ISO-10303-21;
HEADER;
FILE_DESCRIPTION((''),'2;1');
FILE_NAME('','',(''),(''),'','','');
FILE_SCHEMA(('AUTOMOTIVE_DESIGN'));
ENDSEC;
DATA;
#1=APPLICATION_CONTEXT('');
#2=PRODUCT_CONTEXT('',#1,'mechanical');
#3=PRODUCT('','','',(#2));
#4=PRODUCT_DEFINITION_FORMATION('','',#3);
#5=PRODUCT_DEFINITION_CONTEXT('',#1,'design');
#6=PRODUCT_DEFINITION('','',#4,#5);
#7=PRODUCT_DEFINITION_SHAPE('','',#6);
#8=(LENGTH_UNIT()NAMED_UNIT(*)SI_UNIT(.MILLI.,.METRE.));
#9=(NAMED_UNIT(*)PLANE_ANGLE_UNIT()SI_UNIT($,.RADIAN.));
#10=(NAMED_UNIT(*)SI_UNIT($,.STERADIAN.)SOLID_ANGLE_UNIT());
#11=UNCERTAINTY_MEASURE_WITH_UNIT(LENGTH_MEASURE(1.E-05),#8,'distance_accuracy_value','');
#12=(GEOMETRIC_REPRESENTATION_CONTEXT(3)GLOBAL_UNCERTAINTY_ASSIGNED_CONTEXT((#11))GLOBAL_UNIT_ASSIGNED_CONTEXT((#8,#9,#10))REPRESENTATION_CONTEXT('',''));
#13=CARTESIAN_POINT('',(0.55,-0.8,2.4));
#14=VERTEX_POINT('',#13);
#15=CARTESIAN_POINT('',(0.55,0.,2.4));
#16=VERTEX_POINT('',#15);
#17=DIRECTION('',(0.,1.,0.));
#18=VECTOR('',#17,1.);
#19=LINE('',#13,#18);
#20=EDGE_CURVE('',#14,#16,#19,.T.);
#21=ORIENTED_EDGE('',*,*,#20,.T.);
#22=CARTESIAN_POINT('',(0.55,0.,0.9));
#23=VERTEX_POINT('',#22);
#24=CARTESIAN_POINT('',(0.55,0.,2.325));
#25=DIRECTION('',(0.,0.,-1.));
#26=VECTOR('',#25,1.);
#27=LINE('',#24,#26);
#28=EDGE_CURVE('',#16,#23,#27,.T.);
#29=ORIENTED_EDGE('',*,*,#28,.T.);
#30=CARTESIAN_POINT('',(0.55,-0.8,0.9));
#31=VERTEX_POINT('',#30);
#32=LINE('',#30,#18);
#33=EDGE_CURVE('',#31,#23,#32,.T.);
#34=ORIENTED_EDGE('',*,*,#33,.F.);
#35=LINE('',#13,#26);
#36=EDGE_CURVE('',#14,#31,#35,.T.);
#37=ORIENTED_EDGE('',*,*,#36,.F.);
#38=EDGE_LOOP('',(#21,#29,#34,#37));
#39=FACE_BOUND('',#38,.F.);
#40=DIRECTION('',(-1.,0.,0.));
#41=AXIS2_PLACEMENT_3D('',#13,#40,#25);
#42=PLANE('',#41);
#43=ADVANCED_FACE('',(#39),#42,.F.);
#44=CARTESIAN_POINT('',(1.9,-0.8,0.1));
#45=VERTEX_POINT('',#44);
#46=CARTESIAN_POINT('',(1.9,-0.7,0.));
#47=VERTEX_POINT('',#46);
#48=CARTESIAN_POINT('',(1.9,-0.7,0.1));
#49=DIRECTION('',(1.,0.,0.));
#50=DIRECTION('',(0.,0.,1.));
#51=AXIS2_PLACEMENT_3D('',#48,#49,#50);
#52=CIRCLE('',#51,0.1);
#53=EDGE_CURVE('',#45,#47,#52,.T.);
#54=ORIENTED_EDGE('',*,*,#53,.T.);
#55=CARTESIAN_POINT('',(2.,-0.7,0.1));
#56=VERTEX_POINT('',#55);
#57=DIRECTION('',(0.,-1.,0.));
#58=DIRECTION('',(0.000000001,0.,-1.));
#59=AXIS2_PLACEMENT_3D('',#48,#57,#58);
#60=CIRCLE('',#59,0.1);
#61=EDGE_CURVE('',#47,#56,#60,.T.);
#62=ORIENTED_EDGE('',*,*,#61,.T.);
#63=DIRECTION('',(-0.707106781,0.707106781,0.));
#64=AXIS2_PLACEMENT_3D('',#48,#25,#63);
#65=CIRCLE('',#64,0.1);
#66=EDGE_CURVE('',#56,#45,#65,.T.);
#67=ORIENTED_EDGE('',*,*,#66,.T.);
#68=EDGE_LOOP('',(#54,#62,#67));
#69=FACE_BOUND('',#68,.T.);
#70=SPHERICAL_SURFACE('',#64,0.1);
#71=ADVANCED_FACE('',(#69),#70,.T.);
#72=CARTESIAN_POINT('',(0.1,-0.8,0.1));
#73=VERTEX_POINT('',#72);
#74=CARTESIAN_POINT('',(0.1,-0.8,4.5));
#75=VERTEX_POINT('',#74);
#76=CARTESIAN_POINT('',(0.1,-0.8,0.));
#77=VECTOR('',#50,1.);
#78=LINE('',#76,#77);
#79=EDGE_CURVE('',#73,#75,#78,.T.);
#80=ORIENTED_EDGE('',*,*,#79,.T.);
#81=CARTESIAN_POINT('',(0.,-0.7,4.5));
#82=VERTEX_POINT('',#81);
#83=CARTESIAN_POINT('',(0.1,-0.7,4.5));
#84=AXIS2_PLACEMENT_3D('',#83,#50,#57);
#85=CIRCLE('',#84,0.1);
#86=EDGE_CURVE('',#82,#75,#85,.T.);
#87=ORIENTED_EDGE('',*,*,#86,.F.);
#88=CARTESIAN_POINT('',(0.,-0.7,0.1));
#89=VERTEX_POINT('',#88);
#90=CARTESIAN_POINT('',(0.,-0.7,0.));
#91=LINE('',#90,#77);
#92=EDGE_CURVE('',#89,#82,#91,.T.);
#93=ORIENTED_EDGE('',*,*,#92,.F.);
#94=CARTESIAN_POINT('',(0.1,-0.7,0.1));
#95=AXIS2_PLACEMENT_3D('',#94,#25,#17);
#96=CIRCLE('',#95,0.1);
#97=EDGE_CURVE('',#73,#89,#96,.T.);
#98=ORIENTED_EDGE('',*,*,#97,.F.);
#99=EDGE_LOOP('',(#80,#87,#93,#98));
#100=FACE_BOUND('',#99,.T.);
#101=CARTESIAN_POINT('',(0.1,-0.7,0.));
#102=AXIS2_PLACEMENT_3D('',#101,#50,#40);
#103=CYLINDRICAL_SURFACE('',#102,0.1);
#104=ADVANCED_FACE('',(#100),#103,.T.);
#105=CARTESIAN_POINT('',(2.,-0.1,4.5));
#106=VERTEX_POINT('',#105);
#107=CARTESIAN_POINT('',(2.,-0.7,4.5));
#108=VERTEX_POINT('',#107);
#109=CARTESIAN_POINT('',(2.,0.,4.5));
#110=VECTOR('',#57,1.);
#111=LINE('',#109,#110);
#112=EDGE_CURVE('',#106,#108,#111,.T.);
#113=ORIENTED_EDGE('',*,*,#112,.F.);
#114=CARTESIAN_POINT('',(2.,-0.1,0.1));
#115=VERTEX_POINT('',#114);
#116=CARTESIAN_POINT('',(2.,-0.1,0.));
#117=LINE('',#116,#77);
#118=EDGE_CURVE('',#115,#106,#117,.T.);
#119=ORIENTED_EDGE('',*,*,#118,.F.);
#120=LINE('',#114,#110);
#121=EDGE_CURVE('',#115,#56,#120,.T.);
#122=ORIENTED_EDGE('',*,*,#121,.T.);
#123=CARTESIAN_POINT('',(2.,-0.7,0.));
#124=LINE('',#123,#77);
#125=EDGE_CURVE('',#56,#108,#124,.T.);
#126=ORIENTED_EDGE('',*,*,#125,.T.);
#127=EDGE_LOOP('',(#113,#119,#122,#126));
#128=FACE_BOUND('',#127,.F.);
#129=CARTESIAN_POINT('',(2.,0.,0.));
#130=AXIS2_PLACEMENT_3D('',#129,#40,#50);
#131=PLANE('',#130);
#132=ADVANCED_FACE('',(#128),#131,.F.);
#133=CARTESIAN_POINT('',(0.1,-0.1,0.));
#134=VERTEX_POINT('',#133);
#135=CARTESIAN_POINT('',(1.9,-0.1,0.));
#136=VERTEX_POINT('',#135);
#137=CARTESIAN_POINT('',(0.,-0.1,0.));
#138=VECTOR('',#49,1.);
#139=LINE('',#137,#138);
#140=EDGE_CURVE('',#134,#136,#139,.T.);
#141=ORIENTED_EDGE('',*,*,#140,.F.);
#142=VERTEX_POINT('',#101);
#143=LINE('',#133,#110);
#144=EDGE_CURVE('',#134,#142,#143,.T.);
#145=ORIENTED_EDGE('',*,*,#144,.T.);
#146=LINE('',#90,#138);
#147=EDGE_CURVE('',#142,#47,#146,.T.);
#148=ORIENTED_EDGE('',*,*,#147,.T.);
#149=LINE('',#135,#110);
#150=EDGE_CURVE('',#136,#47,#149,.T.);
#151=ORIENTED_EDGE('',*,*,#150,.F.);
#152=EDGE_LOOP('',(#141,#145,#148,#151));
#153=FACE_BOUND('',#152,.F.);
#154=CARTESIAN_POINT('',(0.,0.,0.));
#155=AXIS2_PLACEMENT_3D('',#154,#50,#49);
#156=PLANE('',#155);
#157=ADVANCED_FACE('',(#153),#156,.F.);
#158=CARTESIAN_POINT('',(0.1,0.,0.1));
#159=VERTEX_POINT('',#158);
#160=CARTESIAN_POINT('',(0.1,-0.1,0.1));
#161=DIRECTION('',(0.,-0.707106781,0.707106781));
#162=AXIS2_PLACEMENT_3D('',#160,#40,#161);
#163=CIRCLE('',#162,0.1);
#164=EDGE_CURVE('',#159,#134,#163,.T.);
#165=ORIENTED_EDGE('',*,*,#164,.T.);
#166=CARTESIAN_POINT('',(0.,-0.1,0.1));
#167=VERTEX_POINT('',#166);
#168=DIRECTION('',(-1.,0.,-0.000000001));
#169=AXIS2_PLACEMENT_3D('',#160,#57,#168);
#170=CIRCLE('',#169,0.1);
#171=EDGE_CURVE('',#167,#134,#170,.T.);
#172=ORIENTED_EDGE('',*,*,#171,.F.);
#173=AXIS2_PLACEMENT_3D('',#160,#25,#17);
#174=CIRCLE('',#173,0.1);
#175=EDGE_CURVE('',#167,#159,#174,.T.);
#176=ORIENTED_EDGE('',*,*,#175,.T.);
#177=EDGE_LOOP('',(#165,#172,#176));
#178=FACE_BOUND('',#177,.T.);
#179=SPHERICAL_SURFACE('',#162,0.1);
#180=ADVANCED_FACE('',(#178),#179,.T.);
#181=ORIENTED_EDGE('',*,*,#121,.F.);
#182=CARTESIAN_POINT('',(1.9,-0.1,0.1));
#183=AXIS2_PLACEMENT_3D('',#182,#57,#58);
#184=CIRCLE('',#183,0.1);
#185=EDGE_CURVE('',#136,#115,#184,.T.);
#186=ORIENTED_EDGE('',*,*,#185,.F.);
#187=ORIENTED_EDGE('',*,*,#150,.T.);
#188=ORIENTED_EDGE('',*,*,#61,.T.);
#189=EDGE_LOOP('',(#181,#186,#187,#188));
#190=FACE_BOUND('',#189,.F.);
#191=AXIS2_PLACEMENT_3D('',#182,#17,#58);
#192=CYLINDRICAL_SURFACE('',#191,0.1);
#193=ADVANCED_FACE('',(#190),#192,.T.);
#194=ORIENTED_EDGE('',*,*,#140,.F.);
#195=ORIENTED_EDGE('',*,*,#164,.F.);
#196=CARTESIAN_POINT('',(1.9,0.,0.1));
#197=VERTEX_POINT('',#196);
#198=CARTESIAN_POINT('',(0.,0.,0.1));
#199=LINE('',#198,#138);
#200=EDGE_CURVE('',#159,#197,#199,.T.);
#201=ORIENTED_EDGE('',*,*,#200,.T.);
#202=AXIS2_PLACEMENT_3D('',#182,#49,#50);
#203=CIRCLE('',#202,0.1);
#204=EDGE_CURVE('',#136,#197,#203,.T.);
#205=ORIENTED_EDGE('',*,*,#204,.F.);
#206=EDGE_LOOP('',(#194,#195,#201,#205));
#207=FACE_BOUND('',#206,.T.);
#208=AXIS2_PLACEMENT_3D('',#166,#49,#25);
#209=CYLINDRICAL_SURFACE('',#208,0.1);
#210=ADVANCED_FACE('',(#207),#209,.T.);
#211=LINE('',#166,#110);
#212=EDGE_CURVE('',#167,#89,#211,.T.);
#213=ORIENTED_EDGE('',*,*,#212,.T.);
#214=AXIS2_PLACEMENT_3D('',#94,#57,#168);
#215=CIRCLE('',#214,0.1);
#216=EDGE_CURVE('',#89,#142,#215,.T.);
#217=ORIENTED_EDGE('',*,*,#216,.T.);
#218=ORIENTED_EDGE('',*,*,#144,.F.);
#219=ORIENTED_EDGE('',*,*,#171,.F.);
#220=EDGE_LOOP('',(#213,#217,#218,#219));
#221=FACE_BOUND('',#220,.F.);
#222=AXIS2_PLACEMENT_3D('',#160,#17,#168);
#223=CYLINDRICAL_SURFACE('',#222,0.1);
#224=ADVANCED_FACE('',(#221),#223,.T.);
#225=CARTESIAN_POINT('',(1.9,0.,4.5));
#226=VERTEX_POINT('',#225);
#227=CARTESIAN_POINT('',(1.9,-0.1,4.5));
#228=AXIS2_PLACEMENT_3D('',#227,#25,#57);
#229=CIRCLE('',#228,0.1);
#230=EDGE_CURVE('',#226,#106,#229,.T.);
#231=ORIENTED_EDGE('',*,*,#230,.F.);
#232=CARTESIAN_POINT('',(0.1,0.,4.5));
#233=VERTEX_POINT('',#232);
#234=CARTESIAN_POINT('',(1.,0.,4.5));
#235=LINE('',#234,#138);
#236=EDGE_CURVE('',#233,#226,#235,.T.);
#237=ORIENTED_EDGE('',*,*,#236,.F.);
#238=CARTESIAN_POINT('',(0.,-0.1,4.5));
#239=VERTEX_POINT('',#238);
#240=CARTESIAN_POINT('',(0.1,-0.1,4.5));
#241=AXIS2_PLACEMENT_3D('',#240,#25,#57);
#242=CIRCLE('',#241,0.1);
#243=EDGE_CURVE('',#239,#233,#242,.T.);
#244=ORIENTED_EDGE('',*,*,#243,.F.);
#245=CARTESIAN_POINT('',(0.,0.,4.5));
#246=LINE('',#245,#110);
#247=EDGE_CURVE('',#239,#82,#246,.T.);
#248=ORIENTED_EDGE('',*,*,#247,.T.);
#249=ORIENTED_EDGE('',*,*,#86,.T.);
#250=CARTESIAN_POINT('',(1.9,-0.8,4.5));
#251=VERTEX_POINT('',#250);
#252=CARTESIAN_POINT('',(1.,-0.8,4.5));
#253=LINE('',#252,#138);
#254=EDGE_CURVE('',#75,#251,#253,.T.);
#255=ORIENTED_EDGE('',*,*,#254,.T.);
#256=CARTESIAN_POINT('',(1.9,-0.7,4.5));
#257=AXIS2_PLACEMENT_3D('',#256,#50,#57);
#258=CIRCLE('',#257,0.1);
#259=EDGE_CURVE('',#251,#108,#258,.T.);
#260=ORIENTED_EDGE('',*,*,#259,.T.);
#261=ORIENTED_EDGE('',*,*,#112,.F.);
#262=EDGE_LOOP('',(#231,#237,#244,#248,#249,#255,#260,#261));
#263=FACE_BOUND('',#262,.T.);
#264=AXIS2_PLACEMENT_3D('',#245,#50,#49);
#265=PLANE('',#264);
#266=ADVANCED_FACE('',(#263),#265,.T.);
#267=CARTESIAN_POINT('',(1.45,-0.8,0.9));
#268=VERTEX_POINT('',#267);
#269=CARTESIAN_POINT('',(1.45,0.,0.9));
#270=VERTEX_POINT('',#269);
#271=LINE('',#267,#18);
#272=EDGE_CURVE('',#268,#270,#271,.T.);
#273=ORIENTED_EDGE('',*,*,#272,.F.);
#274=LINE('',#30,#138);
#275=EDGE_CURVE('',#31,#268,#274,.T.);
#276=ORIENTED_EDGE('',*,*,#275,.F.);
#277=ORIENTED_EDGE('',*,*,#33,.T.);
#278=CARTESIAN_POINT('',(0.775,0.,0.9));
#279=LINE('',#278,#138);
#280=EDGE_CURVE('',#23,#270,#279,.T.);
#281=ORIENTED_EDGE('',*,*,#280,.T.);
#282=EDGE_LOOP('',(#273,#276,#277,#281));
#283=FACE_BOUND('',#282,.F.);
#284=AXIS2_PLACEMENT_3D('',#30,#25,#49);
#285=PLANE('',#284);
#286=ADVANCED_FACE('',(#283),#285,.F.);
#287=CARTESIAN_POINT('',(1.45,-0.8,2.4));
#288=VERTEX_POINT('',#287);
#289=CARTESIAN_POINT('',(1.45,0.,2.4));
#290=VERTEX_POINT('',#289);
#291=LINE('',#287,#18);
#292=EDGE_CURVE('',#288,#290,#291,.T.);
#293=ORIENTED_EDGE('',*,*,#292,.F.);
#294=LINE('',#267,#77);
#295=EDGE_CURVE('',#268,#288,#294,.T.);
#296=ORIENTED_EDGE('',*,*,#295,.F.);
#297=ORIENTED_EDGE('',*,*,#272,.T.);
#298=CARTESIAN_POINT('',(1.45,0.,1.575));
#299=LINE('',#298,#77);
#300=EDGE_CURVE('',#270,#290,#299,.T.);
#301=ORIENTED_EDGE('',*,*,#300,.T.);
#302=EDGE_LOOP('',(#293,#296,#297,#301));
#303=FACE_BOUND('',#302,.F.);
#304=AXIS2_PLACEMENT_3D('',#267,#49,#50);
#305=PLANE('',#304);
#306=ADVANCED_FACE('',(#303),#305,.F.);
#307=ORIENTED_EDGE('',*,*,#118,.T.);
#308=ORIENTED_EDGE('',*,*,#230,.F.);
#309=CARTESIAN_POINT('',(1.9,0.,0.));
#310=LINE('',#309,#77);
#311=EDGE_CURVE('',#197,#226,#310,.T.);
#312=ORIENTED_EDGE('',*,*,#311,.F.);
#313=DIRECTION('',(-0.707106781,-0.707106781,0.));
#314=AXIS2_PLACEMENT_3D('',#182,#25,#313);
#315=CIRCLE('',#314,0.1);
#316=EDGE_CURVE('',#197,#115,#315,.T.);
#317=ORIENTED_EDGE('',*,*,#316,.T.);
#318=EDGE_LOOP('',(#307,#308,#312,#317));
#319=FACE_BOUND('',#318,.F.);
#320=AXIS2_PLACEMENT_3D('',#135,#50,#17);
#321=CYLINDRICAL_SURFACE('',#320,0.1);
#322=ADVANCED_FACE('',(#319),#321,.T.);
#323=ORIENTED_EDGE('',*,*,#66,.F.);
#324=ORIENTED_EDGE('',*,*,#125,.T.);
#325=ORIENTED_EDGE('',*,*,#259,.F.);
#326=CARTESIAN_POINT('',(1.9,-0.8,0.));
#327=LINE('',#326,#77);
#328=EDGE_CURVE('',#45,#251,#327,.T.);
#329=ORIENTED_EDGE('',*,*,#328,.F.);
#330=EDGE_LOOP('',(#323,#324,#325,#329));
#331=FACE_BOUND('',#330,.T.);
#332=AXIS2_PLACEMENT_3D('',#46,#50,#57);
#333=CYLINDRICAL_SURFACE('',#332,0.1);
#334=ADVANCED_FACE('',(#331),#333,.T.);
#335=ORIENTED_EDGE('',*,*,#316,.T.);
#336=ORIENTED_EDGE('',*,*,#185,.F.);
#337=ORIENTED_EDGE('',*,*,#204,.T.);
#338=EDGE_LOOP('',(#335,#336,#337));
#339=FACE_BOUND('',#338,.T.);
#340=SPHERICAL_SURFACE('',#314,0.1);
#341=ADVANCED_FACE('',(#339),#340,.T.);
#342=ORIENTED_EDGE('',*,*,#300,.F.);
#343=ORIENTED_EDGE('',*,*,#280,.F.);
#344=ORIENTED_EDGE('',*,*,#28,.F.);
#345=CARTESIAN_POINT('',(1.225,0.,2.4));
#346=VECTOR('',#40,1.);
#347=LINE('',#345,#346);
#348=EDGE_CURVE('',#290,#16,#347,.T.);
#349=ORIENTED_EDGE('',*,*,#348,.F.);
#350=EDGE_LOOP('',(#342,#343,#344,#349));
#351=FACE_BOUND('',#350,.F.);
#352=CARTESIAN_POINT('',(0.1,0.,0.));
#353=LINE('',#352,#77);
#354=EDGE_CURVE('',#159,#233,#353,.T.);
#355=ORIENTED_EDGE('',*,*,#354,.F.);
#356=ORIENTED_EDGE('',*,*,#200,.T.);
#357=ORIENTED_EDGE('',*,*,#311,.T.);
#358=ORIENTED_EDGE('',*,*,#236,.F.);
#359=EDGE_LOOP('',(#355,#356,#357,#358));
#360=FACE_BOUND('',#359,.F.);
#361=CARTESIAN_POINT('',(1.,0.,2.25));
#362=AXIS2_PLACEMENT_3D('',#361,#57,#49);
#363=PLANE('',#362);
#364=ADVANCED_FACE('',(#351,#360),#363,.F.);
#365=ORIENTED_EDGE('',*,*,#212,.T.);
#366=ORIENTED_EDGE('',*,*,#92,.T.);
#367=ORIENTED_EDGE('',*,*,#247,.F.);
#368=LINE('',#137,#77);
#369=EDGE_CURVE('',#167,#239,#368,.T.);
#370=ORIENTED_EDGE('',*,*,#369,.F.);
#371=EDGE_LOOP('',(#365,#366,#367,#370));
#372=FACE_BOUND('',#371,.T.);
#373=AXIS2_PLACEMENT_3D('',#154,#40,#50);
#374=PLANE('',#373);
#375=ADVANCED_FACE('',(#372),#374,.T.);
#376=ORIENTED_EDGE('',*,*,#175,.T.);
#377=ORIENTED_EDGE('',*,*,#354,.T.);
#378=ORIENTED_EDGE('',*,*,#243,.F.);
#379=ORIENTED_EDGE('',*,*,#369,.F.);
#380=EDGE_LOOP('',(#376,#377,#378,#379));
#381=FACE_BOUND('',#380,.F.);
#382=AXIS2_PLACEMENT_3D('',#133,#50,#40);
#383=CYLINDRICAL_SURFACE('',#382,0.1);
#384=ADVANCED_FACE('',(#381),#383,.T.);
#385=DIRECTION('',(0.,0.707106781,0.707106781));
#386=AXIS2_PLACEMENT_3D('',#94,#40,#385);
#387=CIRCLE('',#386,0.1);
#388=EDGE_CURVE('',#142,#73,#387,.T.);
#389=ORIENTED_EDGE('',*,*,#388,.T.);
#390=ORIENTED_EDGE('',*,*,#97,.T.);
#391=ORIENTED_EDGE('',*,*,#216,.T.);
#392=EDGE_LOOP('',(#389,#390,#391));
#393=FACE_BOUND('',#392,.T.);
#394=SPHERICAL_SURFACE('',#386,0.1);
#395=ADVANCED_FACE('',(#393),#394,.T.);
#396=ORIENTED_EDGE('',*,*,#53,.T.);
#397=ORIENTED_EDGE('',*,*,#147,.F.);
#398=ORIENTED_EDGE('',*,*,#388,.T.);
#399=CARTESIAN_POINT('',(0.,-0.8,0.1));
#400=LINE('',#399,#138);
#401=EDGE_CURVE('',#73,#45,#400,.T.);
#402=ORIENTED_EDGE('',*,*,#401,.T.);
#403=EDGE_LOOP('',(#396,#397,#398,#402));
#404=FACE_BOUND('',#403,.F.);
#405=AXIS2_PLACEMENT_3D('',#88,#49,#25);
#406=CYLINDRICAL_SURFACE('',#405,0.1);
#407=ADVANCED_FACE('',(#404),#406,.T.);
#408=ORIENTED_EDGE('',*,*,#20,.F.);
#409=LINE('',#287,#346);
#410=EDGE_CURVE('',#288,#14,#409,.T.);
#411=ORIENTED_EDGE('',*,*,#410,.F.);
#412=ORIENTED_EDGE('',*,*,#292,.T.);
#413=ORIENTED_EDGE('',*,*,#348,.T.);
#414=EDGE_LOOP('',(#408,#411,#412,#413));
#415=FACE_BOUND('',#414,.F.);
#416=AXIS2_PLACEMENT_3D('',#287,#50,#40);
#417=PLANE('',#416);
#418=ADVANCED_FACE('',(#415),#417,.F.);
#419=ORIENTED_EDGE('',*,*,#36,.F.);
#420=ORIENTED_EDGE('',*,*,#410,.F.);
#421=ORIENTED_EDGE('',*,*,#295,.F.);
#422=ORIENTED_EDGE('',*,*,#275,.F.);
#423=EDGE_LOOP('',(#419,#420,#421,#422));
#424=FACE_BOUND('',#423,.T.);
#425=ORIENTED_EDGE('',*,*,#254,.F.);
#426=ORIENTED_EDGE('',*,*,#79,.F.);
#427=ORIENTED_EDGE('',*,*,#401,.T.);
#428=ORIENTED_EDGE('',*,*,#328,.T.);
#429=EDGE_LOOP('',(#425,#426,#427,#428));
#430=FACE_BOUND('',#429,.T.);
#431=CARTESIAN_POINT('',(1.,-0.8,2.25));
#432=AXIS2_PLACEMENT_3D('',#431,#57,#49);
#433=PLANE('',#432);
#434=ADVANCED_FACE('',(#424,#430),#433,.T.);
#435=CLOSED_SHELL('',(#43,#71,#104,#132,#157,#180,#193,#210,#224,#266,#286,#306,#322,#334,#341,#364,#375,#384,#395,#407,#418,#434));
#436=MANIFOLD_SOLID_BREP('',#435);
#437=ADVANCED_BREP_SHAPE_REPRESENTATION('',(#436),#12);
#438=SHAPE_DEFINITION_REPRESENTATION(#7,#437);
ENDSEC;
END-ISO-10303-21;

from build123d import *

# Parameters (mm, degrees)
F0_W         = 2
F0_H         = 4.5
F1_DEPTH     = 0.8
F3_DEPTH     = 25.4
F4_R         = 0.1
F5_T1_DEPTH  = 0.6
F5_S5_W      = 0.1
F5_S5_H      = 0.1
F5_T6_DEPTH  = 0.1
F5_S11_W     = 0.1
F5_S11_H     = 0.1
F5_T12_DEPTH = 0.1
F5_S17_W     = 0.1
F5_S17_H     = 0.1
F5_T18_DEPTH = 0.1
F5_S23_W     = 0.1
F5_S23_H     = 0.1
F5_T24_DEPTH = 0.1


# Not quite as in the source:
# - a fillet or chamfer that OpenCascade refuses, or shapes differently, is made with other operations: its cross-section is extruded or revolved along the edge and cut away or added


with BuildPart() as f1:
    # F0 (on Front) → F1 (new body)
    with BuildSketch(Plane.XZ):
        with Locations((1, 2.25)):
            Rectangle(F0_W, F0_H)
    extrude(amount=F1_DEPTH)

    # F2 (on face) → F3 (cut)
    with BuildSketch(Plane.XZ.offset(0.8)):
        Polygon((0.55, 0.9), (1, 0.9), (1.45, 0.9), (1.45, 2.4), (0.55, 2.4), align=None)
    extrude(amount=-F3_DEPTH, mode=Mode.SUBTRACT)

    # F4
    f4_edges = [f1.edges().sort_by_distance(p)[0] for p in [
        (2, -0.8, 2.25),
        (1, -0.8, 0),
        (0, -0.8, 2.25),
        (2, 0, 2.25),
        (1, 0, 0),
        (0, 0, 2.25),
    ]]
    fillet(f4_edges, radius=F4_R)

    # F5: fillet of radius 0.1 on 2 edges, made by hand

    # F5_s2 → F5_t1 (cut)
    with BuildSketch(Plane.XZ.offset(0.1)):
        with BuildLine():
            ThreePointArc((0, 0.1), (0.0292893219, 0.0292893219), (0.1, 0))
            Line((0.1, 0), (0, 0))
            Line((0, 0), (0, 0.1))
        make_face()
        with BuildLine():
            ThreePointArc((1.9, 0), (1.9707106781, 0.0292893219), (2, 0.1))
            Line((2, 0.1), (2, 0))
            Line((2, 0), (1.9, 0))
        make_face()
    extrude(amount=F5_T1_DEPTH, mode=Mode.SUBTRACT)


with BuildPart() as f5_tool4:
    # F5_s5 → F5_t6 (new body)
    with BuildSketch(Plane.XY.offset(0.1)):
        with Locations((1.95, -0.05)):
            Rectangle(F5_S5_W, F5_S5_H)
    extrude(amount=-F5_T6_DEPTH)

    # F5_s7 → F5_t8 (revolve, cut)
    with BuildSketch(Plane(origin=(1.9, -0.1, 0.1), x_dir=(-0.7071067812, -0.7071067812, 0), z_dir=(0.7071067812, -0.7071067812, 0))):
        with BuildLine():
            ThreePointArc((0, -0.1), (0.1, 0), (0, 0.1))
            Line((0, 0.1), (0, -0.1))
        make_face()
    revolve(axis=Axis((1.9, -0.1, 0.1), (0, 0, -1)), mode=Mode.SUBTRACT)


with BuildPart() as f1_1:
    add(f1.part)

    # F5_t3: cut F5_tool4
    add(f5_tool4.part, mode=Mode.SUBTRACT)


with BuildPart() as f5_tool10:
    # F5_s11 → F5_t12 (new body)
    with BuildSketch(Plane.XY.offset(0.1)):
        with Locations((1.95, -0.75)):
            Rectangle(F5_S11_W, F5_S11_H)
    extrude(amount=-F5_T12_DEPTH)

    # F5_s13 → F5_t14 (revolve, cut)
    with BuildSketch(Plane(origin=(1.9, -0.7, 0.1), x_dir=(-0.7071067812, 0.7071067812, 0), z_dir=(-0.7071067812, -0.7071067812, 0))):
        with BuildLine():
            ThreePointArc((0, -0.1), (0.1, 0), (0, 0.1))
            Line((0, 0.1), (0, -0.1))
        make_face()
    revolve(axis=Axis((1.9, -0.7, 0.1), (0, 0, -1)), mode=Mode.SUBTRACT)


with BuildPart() as f1_2:
    add(f1_1.part)

    # F5_t9: cut F5_tool10
    add(f5_tool10.part, mode=Mode.SUBTRACT)


with BuildPart() as f5_tool16:
    # F5_s17 → F5_t18 (new body)
    with BuildSketch(Plane.YZ.offset(0.1)):
        with Locations((-0.05, 0.05)):
            Rectangle(F5_S17_W, F5_S17_H)
    extrude(amount=-F5_T18_DEPTH)

    # F5_s19 → F5_t20 (revolve, cut)
    with BuildSketch(Plane(origin=(0.1, -0.1, 0.1), x_dir=(0, -0.7071067812, 0.7071067812), z_dir=(0, -0.7071067812, -0.7071067812))):
        with BuildLine():
            ThreePointArc((0, -0.1), (0.1, 0), (0, 0.1))
            Line((0, 0.1), (0, -0.1))
        make_face()
    revolve(axis=Axis((0.1, -0.1, 0.1), (-1, 0, 0)), mode=Mode.SUBTRACT)


with BuildPart() as f1_3:
    add(f1_2.part)

    # F5_t15: cut F5_tool16
    add(f5_tool16.part, mode=Mode.SUBTRACT)


with BuildPart() as f5_tool22:
    # F5_s23 → F5_t24 (new body)
    with BuildSketch(Plane.YZ.offset(0.1)):
        with Locations((-0.75, 0.05)):
            Rectangle(F5_S23_W, F5_S23_H)
    extrude(amount=-F5_T24_DEPTH)

    # F5_s25 → F5_t26 (revolve, cut)
    with BuildSketch(Plane(origin=(0.1, -0.7, 0.1), x_dir=(0, 0.7071067812, 0.7071067812), z_dir=(0, -0.7071067812, 0.7071067812))):
        with BuildLine():
            ThreePointArc((0, -0.1), (0.1, 0), (0, 0.1))
            Line((0, 0.1), (0, -0.1))
        make_face()
    revolve(axis=Axis((0.1, -0.7, 0.1), (-1, 0, 0)), mode=Mode.SUBTRACT)


with BuildPart() as f1_4:
    add(f1_3.part)

    # F5_t21: cut F5_tool22
    add(f5_tool22.part, mode=Mode.SUBTRACT)


solid = f1_4.part
